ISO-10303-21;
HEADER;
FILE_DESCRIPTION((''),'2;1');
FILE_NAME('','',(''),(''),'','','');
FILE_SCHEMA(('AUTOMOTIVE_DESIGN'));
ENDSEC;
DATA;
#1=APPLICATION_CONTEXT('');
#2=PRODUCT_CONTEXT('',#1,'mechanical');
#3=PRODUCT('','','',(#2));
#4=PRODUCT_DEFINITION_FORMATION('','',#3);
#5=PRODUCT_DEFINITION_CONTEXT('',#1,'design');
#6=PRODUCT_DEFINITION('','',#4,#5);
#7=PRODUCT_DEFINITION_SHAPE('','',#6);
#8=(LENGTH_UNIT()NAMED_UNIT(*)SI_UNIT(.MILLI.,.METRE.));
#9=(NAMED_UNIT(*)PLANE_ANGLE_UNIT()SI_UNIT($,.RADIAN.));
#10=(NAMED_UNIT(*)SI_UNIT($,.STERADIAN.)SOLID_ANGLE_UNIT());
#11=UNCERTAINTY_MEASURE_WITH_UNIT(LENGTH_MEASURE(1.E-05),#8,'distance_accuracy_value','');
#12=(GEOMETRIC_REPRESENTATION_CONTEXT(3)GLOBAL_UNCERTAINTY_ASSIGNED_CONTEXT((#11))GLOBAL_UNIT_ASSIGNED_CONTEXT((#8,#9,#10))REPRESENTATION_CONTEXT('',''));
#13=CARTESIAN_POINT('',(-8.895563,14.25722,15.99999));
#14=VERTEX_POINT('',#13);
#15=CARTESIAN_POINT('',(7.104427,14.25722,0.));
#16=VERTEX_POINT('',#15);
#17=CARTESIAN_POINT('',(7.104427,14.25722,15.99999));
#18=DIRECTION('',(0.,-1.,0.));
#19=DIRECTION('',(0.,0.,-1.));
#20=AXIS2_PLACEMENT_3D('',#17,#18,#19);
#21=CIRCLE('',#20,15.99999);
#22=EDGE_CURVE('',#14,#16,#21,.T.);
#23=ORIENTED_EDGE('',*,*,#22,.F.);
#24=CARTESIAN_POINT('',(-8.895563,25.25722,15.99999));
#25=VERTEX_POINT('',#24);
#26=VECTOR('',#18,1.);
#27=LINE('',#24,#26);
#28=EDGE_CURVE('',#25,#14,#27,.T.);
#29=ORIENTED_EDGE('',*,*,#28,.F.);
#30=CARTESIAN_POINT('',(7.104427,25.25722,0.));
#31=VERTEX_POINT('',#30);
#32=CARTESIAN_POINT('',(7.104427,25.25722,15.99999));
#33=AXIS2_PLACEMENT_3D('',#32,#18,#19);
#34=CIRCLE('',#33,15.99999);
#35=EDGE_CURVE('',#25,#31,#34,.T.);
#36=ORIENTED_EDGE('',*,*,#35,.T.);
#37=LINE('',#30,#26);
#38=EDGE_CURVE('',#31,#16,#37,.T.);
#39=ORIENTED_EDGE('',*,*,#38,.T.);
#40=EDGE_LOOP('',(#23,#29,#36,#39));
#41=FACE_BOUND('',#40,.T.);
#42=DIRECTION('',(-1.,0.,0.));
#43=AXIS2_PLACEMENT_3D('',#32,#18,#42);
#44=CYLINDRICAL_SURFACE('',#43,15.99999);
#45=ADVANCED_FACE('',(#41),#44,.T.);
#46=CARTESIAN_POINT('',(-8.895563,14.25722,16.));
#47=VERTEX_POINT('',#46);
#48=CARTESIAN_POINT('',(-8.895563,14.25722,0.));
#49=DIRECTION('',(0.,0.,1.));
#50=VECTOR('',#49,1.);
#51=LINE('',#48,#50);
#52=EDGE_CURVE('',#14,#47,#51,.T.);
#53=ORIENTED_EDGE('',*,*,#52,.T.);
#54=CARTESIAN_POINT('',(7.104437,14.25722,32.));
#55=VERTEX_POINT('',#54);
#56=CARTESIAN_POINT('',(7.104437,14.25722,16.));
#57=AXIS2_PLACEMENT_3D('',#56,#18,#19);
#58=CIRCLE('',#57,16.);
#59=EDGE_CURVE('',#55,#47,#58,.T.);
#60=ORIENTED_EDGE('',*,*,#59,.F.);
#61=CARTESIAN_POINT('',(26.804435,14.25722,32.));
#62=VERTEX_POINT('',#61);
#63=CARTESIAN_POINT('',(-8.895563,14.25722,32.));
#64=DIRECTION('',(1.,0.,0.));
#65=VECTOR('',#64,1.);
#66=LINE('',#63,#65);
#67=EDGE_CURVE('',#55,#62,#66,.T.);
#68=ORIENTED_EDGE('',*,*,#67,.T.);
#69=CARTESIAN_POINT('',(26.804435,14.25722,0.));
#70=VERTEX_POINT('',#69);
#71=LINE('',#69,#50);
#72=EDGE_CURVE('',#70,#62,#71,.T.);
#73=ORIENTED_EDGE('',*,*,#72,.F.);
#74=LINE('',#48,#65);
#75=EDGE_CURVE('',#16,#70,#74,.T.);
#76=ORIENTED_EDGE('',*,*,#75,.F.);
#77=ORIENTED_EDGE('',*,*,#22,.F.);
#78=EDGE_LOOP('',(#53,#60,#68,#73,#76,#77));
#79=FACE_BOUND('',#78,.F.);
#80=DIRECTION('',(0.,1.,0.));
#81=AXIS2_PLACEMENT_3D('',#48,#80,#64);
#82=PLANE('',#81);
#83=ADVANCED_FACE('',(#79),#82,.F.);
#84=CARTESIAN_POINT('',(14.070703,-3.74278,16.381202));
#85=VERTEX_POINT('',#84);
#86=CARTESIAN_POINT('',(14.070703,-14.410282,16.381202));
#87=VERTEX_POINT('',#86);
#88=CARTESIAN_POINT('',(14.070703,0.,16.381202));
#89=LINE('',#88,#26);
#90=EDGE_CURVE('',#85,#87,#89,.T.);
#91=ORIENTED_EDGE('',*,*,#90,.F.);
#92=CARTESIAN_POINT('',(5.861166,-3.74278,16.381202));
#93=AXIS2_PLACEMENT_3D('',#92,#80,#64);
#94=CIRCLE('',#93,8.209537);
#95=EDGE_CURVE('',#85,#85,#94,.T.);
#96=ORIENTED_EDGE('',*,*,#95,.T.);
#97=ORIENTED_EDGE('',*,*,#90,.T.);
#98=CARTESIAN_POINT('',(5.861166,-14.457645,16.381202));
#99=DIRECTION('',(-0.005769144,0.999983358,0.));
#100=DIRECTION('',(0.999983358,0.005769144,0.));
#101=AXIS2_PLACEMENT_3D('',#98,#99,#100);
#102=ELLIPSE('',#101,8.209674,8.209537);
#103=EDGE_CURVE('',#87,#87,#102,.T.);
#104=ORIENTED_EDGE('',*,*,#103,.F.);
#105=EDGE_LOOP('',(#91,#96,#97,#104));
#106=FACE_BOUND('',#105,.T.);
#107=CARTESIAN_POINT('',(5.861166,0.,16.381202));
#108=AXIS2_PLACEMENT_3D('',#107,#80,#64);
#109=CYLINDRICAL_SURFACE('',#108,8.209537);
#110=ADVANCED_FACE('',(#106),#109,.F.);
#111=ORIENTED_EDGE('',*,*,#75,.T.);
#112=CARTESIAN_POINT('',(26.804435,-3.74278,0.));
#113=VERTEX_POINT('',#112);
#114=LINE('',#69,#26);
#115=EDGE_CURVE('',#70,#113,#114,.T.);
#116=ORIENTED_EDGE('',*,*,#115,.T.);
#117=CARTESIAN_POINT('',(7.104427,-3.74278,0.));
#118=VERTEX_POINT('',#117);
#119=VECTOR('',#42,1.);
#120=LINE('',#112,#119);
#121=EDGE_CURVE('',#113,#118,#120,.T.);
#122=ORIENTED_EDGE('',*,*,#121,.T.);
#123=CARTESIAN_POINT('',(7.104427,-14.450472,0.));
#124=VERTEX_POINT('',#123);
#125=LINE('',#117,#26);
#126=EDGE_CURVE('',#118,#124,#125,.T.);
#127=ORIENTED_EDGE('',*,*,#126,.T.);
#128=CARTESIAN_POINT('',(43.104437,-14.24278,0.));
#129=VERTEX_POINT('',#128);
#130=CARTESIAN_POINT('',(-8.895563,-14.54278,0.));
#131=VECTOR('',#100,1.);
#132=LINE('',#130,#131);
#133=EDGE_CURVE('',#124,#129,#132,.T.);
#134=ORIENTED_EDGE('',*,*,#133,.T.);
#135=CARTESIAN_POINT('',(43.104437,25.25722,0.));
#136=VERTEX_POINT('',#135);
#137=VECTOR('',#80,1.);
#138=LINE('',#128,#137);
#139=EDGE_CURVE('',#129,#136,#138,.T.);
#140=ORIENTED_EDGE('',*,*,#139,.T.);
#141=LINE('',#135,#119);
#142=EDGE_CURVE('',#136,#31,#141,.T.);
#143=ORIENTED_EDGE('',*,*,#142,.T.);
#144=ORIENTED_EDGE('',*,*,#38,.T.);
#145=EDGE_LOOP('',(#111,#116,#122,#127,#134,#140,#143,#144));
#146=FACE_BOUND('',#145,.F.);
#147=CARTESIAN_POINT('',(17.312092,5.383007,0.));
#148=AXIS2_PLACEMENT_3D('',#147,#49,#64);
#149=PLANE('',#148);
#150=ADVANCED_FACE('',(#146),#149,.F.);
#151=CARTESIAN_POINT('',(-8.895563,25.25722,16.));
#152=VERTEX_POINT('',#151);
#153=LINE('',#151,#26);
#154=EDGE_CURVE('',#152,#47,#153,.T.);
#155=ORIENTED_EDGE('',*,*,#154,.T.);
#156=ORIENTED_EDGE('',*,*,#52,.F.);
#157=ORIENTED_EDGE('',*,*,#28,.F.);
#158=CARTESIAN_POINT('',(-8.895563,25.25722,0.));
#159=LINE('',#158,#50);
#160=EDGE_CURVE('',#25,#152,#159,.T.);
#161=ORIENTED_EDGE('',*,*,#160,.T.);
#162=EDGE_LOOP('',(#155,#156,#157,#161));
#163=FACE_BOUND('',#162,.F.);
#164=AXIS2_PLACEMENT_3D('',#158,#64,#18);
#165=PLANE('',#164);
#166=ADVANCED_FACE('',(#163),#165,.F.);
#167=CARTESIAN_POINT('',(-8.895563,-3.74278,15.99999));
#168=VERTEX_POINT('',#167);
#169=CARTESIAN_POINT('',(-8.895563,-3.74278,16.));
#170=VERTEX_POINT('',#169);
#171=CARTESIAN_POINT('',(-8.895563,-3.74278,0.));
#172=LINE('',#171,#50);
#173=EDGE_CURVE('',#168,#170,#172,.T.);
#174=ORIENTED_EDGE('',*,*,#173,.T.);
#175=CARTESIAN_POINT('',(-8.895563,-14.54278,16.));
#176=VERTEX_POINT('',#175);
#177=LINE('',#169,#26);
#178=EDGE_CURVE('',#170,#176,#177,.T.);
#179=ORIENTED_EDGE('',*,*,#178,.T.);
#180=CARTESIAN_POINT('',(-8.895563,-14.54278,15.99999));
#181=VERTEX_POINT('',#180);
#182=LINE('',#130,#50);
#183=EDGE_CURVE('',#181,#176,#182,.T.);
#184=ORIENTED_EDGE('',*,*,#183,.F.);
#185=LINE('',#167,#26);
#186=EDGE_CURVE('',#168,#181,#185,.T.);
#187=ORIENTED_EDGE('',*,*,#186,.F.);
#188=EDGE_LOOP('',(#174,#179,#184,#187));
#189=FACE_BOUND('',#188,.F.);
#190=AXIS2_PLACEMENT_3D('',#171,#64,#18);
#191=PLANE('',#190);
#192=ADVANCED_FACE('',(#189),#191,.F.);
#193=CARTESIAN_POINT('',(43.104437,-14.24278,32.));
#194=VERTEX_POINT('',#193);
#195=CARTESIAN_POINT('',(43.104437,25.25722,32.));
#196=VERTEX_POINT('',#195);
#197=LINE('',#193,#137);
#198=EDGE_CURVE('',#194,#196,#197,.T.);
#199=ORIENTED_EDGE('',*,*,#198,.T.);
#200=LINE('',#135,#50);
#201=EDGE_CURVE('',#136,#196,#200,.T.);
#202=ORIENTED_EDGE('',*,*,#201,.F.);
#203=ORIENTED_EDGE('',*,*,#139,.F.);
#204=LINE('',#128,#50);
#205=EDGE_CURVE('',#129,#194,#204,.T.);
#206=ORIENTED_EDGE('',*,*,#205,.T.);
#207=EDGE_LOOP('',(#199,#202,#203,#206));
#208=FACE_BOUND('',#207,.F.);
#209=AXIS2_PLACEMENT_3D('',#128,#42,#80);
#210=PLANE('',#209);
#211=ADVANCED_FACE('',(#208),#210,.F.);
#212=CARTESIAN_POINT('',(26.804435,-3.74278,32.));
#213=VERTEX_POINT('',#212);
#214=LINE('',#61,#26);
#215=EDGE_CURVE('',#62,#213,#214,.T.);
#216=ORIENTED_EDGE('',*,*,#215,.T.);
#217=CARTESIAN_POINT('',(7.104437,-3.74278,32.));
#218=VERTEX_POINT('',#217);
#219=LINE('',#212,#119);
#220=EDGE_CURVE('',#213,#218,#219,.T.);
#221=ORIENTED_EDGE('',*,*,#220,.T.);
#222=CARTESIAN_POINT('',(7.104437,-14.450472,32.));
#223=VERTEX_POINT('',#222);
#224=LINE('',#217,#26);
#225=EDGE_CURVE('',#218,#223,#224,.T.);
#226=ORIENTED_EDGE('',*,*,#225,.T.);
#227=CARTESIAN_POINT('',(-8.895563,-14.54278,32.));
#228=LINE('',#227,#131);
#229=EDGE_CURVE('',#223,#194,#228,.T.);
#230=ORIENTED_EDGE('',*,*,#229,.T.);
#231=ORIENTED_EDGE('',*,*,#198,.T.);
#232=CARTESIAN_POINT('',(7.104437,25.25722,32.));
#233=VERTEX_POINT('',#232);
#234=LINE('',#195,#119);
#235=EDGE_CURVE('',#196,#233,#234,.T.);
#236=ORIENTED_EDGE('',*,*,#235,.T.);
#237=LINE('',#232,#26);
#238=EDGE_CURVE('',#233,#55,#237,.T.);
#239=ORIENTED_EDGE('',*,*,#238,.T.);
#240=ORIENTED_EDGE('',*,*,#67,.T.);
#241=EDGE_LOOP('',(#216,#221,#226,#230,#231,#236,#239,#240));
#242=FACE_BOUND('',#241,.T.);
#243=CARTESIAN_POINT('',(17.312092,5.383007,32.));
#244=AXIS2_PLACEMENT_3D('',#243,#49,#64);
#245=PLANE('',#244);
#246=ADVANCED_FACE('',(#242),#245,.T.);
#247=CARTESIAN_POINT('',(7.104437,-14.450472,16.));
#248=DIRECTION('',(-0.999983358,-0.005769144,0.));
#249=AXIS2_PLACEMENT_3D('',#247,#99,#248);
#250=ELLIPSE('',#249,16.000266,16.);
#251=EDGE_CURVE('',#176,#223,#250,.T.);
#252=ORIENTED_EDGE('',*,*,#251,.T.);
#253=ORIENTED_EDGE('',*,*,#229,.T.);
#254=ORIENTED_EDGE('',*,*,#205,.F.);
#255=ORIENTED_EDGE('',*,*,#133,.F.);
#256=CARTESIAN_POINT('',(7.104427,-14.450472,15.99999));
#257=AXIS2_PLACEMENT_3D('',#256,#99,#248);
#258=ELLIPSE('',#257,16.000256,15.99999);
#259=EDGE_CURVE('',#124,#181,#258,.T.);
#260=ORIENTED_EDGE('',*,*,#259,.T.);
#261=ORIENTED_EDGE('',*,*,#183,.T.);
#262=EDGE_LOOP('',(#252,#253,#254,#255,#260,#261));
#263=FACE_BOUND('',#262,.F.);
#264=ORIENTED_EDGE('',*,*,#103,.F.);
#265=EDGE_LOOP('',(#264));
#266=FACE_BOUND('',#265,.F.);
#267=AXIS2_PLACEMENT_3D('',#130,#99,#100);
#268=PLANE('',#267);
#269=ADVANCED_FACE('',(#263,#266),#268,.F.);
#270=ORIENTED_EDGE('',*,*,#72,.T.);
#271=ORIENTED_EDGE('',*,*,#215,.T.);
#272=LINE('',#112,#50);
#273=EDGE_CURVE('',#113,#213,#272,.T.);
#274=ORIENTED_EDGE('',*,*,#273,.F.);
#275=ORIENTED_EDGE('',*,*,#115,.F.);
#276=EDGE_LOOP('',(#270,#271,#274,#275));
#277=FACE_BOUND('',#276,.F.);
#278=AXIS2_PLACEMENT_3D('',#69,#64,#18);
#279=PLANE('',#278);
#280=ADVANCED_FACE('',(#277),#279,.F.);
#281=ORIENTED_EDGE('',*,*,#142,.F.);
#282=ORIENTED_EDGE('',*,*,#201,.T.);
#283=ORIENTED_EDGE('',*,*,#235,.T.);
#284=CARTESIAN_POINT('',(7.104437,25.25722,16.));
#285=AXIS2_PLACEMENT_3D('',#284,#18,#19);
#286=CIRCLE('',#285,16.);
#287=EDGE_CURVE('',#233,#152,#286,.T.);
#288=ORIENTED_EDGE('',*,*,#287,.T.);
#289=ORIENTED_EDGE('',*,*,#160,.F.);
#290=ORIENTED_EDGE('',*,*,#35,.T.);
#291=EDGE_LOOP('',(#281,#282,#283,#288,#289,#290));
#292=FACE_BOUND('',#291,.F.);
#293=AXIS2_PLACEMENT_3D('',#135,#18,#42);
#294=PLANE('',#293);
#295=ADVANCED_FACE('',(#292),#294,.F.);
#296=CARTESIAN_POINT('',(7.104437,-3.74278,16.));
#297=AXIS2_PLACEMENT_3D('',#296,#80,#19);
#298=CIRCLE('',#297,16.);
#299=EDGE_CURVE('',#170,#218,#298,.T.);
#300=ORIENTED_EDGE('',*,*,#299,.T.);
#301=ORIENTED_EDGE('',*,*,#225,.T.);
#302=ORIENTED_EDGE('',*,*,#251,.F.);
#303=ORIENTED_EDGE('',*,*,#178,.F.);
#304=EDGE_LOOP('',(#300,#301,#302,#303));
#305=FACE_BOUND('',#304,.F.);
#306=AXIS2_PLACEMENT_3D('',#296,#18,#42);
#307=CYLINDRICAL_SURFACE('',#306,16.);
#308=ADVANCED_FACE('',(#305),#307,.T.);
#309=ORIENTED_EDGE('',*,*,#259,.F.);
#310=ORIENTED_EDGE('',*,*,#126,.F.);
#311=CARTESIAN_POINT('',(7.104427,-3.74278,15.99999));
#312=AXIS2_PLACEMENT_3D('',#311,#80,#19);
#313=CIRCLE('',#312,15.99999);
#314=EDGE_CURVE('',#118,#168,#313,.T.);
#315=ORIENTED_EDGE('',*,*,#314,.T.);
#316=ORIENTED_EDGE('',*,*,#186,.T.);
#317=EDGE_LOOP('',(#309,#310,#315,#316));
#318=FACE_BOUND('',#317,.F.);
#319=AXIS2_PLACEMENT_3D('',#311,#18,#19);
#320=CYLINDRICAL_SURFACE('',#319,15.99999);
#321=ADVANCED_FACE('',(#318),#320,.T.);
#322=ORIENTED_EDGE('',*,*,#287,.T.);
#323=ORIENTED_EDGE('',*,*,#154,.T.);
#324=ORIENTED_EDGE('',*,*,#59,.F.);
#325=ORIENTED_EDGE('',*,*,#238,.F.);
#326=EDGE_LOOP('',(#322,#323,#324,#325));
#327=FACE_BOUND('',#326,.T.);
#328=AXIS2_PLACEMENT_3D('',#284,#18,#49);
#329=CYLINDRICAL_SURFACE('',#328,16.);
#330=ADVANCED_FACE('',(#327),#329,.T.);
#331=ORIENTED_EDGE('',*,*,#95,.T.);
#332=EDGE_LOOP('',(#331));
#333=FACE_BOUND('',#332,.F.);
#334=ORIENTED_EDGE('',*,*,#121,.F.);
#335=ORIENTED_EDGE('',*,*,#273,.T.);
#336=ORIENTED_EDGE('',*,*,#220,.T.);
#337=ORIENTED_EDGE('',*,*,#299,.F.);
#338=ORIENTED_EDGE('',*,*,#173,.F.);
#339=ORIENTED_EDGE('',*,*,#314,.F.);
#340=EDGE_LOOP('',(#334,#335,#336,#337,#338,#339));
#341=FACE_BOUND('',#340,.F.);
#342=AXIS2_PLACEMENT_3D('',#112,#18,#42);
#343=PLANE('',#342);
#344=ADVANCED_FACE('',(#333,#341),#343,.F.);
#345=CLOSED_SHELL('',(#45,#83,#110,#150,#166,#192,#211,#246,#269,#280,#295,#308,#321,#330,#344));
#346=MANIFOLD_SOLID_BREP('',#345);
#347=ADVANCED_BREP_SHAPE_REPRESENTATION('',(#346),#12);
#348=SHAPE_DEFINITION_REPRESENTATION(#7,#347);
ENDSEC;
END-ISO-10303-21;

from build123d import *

# Parameters (mm, degrees)
F1_DEPTH = 32
F2_R     = 16
F3_R     = 16
F4_R     = 15.99999
F5_R     = 15.99999
F6_R     = 8.20953723
F7_DEPTH = 16


# Not quite as in the source:
# - a fillet or chamfer is up to 0.001 mm smaller than in the source, because OpenCascade refuses the exact size


with BuildPart() as f1:
    # F0 (on Top) → F1 (new body)
    with BuildSketch(Plane.XY):
        Polygon((43.1044374643, -14.2427797436), (43.1044374643, 25.2572197622), (-8.8955625357, 25.2572197622), (-8.8955625357, 14.2572197622), (26.8044351456, 14.2572197622), (26.8044351456, -3.7427802378), (-8.8955625357, -3.7427802378), (-8.8955625357, -14.5427802378), align=None)
    extrude(amount=F1_DEPTH)

    # F2
    f2_edges = [f1.edges().sort_by_distance(p)[0] for p in [
        (-8.895563, -9.14278, 32),
    ]]
    fillet(f2_edges, radius=F2_R)

    # F3
    f3_edges = [f1.edges().sort_by_distance(p)[0] for p in [
        (-8.895563, 19.75722, 32),
    ]]
    fillet(f3_edges, radius=F3_R)

    # F4 (radius 16 in the source; OpenCascade refuses exactly that, so slightly less here)
    f4_edges = [f1.edges().sort_by_distance(p)[0] for p in [
        (-8.895563, 19.75722, 0),
    ]]
    fillet(f4_edges, radius=F4_R)

    # F5 (radius 16 in the source; OpenCascade refuses exactly that, so slightly less here)
    f5_edges = [f1.edges().sort_by_distance(p)[0] for p in [
        (-8.895563, -9.14278, 0),
    ]]
    fillet(f5_edges, radius=F5_R)

    # F6 (on Front) → F7 (cut)
    with BuildSketch(Plane.XZ):
        with Locations((5.8611659333, 16.3812022656)):
            Circle(F6_R)
    extrude(amount=F7_DEPTH, mode=Mode.SUBTRACT)


solid = f1.part
